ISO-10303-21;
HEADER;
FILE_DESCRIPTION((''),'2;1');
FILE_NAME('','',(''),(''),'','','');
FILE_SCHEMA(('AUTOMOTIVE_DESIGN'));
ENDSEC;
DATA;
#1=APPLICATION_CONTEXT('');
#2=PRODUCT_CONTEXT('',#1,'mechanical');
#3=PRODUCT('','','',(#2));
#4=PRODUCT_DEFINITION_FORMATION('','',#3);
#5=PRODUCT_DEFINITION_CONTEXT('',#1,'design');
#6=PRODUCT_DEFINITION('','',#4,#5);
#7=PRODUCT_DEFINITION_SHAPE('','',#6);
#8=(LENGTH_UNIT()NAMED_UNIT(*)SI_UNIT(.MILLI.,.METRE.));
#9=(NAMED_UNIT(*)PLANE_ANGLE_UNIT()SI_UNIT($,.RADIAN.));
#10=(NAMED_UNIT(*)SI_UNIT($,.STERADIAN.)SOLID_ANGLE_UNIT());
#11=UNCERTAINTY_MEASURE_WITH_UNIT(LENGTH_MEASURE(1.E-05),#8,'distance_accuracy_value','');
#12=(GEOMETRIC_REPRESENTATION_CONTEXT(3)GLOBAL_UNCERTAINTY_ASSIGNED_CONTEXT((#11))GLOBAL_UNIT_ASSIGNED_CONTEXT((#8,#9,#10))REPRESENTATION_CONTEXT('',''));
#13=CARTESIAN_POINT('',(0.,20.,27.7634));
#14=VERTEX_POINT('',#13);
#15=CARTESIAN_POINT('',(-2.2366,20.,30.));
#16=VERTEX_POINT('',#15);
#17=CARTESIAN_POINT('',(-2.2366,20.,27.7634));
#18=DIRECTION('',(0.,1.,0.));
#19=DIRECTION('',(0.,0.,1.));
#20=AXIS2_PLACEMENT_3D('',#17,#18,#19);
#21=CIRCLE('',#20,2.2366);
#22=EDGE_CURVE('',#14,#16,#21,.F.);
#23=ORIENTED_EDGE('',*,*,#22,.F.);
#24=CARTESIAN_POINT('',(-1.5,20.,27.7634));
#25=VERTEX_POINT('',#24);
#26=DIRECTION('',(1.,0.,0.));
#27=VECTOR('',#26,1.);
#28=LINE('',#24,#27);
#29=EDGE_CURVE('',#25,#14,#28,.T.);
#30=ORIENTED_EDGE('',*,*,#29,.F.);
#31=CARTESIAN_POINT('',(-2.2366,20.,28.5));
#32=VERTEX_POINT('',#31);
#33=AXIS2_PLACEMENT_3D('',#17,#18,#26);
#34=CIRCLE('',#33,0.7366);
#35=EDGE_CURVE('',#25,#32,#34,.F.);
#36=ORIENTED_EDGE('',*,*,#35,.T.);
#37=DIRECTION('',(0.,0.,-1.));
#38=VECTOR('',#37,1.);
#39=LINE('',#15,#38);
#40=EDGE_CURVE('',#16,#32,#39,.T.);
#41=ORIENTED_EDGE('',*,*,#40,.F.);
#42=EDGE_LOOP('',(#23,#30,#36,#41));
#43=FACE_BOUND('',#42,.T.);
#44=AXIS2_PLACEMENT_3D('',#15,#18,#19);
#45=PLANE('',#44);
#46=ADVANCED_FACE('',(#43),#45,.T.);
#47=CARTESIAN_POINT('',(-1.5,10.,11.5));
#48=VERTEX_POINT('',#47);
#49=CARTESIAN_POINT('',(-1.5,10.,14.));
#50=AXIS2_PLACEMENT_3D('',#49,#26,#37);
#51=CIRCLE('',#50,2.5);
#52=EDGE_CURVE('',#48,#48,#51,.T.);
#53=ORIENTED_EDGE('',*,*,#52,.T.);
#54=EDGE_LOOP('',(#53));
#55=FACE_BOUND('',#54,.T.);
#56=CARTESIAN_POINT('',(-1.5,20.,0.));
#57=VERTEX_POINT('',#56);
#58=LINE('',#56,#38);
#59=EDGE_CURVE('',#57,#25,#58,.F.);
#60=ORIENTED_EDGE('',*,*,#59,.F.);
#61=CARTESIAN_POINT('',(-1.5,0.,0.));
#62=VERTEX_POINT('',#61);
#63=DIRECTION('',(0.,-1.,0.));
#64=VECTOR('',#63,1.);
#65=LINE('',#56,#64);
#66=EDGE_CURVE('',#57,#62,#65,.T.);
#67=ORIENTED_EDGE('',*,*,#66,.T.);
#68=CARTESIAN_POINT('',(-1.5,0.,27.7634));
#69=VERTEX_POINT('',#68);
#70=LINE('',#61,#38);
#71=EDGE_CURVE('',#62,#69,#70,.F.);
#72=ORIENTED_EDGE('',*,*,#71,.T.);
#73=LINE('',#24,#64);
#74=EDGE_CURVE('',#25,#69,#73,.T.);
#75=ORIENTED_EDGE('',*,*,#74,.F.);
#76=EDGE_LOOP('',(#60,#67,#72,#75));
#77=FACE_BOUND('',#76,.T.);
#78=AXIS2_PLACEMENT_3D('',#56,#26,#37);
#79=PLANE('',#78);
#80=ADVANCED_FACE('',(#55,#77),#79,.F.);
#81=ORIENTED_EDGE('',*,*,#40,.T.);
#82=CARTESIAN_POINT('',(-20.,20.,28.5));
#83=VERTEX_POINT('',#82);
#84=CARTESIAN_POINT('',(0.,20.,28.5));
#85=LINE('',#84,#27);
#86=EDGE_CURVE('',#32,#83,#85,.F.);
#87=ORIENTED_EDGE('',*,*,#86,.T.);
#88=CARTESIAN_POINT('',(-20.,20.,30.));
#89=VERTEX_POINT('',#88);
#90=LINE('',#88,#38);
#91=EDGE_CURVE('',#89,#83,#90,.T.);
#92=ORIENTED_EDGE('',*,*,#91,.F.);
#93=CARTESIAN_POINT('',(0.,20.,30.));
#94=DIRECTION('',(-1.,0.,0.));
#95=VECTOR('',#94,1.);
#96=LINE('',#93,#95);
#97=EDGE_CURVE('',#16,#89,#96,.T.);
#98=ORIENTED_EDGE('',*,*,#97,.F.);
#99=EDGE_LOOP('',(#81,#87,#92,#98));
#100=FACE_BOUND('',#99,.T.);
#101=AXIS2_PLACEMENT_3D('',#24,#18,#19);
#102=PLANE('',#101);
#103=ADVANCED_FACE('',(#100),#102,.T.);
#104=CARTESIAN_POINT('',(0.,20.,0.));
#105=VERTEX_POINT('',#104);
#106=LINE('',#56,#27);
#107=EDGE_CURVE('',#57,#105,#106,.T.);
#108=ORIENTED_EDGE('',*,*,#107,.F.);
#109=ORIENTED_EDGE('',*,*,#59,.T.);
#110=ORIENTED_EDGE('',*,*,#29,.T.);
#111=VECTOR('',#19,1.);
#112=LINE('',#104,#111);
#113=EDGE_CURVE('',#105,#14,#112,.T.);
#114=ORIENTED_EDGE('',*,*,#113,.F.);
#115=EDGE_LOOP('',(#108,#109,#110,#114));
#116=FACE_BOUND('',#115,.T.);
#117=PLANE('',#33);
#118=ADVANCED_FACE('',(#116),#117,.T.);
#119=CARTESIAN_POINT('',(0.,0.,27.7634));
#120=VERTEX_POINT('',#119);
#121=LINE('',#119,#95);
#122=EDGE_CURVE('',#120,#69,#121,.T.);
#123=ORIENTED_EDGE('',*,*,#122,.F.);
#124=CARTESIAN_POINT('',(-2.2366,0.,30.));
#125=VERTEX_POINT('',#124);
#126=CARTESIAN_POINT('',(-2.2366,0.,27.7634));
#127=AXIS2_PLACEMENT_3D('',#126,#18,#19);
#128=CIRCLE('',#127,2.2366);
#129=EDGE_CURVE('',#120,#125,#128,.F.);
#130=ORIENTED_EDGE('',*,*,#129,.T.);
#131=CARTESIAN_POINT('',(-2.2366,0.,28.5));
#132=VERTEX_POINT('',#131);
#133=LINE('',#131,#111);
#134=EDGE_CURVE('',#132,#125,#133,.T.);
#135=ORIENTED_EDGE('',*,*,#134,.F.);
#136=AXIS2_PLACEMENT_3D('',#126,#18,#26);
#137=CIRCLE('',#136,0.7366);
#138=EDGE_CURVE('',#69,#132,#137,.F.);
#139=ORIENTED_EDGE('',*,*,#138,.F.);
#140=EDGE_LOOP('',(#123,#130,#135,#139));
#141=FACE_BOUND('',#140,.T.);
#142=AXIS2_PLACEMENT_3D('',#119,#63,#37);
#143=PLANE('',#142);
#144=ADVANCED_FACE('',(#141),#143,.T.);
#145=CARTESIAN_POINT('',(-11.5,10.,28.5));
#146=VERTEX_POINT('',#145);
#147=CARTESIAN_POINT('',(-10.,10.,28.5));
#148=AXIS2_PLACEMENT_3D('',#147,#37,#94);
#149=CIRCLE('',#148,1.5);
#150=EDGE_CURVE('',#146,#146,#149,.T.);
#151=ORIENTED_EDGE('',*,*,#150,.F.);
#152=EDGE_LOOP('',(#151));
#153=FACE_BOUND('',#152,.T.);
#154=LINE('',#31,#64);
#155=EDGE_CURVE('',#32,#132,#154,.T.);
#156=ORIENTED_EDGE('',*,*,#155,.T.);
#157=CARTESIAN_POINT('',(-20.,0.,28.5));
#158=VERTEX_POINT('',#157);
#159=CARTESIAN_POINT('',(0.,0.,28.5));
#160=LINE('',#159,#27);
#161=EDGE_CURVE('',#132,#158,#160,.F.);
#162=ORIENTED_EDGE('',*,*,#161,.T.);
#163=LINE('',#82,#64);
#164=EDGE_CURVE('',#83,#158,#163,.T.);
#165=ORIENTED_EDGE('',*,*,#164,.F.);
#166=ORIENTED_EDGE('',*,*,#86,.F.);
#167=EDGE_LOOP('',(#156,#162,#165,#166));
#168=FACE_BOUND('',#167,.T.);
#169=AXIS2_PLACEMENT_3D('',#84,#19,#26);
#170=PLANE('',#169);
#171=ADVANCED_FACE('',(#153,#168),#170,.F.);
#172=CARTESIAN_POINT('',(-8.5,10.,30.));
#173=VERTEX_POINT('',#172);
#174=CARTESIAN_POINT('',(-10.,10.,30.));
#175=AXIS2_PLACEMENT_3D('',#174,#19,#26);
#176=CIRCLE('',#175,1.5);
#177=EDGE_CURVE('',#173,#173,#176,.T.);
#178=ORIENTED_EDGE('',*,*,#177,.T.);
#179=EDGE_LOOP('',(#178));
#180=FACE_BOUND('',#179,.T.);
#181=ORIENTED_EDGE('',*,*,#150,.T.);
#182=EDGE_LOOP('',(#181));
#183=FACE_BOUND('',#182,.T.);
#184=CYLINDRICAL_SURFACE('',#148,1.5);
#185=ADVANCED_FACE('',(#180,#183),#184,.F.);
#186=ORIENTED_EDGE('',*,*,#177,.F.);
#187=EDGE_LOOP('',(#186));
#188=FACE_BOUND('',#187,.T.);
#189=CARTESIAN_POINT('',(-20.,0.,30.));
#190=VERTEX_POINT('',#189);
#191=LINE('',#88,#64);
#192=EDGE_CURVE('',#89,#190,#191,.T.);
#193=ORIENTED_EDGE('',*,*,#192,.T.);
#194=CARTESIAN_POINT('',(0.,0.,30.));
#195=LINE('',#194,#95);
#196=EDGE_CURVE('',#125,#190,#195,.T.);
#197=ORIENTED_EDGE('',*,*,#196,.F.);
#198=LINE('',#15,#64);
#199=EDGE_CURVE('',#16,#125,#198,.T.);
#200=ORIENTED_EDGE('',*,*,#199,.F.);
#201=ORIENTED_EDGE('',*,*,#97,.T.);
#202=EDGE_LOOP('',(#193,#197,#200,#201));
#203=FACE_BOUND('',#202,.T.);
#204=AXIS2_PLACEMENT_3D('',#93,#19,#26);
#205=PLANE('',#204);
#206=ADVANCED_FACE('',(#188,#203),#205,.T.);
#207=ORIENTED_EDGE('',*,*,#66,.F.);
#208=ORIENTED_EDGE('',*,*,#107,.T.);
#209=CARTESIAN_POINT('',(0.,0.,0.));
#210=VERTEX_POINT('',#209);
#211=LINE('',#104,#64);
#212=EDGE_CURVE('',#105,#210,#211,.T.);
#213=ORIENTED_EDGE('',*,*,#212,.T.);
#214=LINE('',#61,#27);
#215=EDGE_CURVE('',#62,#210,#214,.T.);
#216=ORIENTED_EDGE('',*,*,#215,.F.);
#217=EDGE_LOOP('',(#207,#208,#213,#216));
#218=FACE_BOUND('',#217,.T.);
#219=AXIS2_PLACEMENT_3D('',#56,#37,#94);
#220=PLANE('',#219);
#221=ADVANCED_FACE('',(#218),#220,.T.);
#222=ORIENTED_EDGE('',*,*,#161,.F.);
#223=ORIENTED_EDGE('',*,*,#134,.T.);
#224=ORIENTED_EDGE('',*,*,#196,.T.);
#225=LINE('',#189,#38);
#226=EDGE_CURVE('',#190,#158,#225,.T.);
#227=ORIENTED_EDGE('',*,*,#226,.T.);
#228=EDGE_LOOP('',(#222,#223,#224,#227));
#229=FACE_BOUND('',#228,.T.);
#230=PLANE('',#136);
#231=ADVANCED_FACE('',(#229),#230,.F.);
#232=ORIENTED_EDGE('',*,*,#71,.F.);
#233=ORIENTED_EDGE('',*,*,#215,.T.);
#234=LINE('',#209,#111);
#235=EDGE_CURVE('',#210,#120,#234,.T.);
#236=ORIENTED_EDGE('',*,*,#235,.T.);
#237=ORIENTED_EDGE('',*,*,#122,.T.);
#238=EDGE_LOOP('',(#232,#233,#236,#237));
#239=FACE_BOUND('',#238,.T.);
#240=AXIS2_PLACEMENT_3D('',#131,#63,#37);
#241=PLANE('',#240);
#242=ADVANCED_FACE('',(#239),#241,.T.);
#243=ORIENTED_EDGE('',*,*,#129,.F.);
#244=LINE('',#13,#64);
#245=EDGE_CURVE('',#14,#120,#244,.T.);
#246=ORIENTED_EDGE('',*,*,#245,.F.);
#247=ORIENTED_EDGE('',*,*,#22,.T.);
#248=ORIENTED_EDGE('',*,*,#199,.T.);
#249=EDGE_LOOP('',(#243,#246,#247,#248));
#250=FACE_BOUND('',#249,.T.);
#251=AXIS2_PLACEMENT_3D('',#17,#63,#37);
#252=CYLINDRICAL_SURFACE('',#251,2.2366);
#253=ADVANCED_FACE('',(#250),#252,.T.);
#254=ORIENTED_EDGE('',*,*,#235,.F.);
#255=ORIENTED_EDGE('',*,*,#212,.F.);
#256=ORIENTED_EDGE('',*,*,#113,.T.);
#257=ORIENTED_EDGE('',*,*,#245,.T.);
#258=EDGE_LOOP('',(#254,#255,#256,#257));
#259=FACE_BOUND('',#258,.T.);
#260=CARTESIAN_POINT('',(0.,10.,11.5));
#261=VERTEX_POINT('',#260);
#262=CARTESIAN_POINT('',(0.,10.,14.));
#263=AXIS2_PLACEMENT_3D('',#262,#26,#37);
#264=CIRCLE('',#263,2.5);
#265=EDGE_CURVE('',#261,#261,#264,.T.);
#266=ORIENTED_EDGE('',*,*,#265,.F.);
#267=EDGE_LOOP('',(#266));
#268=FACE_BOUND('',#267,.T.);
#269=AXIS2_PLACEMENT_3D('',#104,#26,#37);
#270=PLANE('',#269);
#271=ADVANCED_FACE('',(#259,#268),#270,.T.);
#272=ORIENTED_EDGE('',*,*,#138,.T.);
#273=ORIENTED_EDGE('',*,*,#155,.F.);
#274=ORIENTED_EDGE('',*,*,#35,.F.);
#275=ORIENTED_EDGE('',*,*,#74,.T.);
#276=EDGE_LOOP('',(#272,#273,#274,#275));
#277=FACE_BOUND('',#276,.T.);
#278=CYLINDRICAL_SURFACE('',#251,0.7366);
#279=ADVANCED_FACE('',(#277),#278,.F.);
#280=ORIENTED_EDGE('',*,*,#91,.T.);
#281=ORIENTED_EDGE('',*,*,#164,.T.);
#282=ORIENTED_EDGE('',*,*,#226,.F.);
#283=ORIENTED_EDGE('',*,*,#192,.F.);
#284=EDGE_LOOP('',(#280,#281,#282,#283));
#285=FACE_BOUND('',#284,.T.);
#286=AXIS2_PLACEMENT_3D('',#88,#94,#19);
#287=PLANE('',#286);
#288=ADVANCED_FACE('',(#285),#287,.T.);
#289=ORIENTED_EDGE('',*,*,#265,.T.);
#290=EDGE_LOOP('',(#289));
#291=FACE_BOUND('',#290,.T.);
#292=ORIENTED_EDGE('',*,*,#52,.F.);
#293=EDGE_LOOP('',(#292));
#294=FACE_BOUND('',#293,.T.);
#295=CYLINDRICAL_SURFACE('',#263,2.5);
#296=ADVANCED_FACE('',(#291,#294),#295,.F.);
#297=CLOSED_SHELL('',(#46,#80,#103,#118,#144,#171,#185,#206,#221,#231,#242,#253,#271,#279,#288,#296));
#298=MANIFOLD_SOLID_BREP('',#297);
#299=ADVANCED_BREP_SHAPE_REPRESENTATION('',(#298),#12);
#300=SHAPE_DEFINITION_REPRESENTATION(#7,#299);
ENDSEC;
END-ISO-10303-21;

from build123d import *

# Parameters (mm, degrees)
BASE_FLANGE1_DEPTH              = 20
F_5_0MM_PRESS_DOWEL_HOLE1_D     = 5
F_3_0MM_PRESS_DOWEL_HOLE1_D     = 3
F_3_0MM_PRESS_DOWEL_HOLE2_D     = 3
F_3_0MM_PRESS_DOWEL_HOLE2_DEPTH = 6
F_3_0MM_PRESS_DOWEL_HOLE2_TIP   = 0.901290929


# Sheet-metal steps are written as plain solids
with BuildPart() as part:
    # Sketch1 → Base-Flange1 (new body)
    with BuildSketch(Plane(origin=(0, 0, 0), x_dir=(1, 0, 0), z_dir=(0, 1, 0))):
        with BuildLine():
            Line((0, 0), (0, -27.7634))
            ThreePointArc((0, -27.7634), (-0.655084973, -29.344915027), (-2.2366, -30))
            Line((-2.2366, -30), (-20, -30))
            Line((-20, -30), (-20, -28.5))
            Line((-20, -28.5), (-2.2366, -28.5))
            ThreePointArc((-2.2366, -28.5), (-1.715745145, -28.284254855), (-1.5, -27.7634))
            Line((-1.5, -27.7634), (-1.5, 0))
            Line((-1.5, 0), (0, 0))
        make_face()
    extrude(amount=BASE_FLANGE1_DEPTH)

    # Ø5.0mm Press Dowel Hole1 (through all)
    with Locations(Plane(origin=(0, 0, 0), x_dir=(0, 0, -1), z_dir=(1, 0, 0))):
        with Locations((-14, 10)):
            Hole(F_5_0MM_PRESS_DOWEL_HOLE1_D / 2)

    # Ø3.0mm Press Dowel Hole1 (through all)
    with Locations(Plane(origin=(0, 0, 28.5), x_dir=(-1, 0, 0), z_dir=(0, 0, -1))):
        with Locations((10, 10)):
            Hole(F_3_0MM_PRESS_DOWEL_HOLE1_D / 2)

    # Ø3.0mm Press Dowel Hole2
    with Locations(Plane(origin=(-166.531359221, -210.525513363, 30), x_dir=(0, 1, 0), z_dir=(0, 0, -1))):
        with Locations((220.525513363, 156.531359221), (102.525513363, 181.531359221), (102.525513363, 271.531359221), (89.19270005, 226.531359221), (210.525513363, 317.793651488), (230.525513363, 317.793651488), (252.525513363, 320.462332131), (232.525513363, 300.462332131), (252.525513363, 132.600386311), (232.525513363, 152.600386311), (111.286271896, 136.531359221), (91.286271896, 136.531359221), (41.525513363, 196.432813402), (13.525513363, 196.432813402), (41.525513363, 138.767959221), (13.525513363, 138.767959221), (41.525513363, 256.62990504), (13.525513363, 256.62990504), (41.525513363, 314.294759221), (13.525513363, 314.294759221)):
            Hole(F_3_0MM_PRESS_DOWEL_HOLE2_D / 2, depth=F_3_0MM_PRESS_DOWEL_HOLE2_DEPTH)
            with Locations((0, 0, -(F_3_0MM_PRESS_DOWEL_HOLE2_DEPTH + F_3_0MM_PRESS_DOWEL_HOLE2_TIP / 2))):  # 118° drill point
                Cone(0, F_3_0MM_PRESS_DOWEL_HOLE2_D / 2, F_3_0MM_PRESS_DOWEL_HOLE2_TIP, mode=Mode.SUBTRACT)


solid = part.part
